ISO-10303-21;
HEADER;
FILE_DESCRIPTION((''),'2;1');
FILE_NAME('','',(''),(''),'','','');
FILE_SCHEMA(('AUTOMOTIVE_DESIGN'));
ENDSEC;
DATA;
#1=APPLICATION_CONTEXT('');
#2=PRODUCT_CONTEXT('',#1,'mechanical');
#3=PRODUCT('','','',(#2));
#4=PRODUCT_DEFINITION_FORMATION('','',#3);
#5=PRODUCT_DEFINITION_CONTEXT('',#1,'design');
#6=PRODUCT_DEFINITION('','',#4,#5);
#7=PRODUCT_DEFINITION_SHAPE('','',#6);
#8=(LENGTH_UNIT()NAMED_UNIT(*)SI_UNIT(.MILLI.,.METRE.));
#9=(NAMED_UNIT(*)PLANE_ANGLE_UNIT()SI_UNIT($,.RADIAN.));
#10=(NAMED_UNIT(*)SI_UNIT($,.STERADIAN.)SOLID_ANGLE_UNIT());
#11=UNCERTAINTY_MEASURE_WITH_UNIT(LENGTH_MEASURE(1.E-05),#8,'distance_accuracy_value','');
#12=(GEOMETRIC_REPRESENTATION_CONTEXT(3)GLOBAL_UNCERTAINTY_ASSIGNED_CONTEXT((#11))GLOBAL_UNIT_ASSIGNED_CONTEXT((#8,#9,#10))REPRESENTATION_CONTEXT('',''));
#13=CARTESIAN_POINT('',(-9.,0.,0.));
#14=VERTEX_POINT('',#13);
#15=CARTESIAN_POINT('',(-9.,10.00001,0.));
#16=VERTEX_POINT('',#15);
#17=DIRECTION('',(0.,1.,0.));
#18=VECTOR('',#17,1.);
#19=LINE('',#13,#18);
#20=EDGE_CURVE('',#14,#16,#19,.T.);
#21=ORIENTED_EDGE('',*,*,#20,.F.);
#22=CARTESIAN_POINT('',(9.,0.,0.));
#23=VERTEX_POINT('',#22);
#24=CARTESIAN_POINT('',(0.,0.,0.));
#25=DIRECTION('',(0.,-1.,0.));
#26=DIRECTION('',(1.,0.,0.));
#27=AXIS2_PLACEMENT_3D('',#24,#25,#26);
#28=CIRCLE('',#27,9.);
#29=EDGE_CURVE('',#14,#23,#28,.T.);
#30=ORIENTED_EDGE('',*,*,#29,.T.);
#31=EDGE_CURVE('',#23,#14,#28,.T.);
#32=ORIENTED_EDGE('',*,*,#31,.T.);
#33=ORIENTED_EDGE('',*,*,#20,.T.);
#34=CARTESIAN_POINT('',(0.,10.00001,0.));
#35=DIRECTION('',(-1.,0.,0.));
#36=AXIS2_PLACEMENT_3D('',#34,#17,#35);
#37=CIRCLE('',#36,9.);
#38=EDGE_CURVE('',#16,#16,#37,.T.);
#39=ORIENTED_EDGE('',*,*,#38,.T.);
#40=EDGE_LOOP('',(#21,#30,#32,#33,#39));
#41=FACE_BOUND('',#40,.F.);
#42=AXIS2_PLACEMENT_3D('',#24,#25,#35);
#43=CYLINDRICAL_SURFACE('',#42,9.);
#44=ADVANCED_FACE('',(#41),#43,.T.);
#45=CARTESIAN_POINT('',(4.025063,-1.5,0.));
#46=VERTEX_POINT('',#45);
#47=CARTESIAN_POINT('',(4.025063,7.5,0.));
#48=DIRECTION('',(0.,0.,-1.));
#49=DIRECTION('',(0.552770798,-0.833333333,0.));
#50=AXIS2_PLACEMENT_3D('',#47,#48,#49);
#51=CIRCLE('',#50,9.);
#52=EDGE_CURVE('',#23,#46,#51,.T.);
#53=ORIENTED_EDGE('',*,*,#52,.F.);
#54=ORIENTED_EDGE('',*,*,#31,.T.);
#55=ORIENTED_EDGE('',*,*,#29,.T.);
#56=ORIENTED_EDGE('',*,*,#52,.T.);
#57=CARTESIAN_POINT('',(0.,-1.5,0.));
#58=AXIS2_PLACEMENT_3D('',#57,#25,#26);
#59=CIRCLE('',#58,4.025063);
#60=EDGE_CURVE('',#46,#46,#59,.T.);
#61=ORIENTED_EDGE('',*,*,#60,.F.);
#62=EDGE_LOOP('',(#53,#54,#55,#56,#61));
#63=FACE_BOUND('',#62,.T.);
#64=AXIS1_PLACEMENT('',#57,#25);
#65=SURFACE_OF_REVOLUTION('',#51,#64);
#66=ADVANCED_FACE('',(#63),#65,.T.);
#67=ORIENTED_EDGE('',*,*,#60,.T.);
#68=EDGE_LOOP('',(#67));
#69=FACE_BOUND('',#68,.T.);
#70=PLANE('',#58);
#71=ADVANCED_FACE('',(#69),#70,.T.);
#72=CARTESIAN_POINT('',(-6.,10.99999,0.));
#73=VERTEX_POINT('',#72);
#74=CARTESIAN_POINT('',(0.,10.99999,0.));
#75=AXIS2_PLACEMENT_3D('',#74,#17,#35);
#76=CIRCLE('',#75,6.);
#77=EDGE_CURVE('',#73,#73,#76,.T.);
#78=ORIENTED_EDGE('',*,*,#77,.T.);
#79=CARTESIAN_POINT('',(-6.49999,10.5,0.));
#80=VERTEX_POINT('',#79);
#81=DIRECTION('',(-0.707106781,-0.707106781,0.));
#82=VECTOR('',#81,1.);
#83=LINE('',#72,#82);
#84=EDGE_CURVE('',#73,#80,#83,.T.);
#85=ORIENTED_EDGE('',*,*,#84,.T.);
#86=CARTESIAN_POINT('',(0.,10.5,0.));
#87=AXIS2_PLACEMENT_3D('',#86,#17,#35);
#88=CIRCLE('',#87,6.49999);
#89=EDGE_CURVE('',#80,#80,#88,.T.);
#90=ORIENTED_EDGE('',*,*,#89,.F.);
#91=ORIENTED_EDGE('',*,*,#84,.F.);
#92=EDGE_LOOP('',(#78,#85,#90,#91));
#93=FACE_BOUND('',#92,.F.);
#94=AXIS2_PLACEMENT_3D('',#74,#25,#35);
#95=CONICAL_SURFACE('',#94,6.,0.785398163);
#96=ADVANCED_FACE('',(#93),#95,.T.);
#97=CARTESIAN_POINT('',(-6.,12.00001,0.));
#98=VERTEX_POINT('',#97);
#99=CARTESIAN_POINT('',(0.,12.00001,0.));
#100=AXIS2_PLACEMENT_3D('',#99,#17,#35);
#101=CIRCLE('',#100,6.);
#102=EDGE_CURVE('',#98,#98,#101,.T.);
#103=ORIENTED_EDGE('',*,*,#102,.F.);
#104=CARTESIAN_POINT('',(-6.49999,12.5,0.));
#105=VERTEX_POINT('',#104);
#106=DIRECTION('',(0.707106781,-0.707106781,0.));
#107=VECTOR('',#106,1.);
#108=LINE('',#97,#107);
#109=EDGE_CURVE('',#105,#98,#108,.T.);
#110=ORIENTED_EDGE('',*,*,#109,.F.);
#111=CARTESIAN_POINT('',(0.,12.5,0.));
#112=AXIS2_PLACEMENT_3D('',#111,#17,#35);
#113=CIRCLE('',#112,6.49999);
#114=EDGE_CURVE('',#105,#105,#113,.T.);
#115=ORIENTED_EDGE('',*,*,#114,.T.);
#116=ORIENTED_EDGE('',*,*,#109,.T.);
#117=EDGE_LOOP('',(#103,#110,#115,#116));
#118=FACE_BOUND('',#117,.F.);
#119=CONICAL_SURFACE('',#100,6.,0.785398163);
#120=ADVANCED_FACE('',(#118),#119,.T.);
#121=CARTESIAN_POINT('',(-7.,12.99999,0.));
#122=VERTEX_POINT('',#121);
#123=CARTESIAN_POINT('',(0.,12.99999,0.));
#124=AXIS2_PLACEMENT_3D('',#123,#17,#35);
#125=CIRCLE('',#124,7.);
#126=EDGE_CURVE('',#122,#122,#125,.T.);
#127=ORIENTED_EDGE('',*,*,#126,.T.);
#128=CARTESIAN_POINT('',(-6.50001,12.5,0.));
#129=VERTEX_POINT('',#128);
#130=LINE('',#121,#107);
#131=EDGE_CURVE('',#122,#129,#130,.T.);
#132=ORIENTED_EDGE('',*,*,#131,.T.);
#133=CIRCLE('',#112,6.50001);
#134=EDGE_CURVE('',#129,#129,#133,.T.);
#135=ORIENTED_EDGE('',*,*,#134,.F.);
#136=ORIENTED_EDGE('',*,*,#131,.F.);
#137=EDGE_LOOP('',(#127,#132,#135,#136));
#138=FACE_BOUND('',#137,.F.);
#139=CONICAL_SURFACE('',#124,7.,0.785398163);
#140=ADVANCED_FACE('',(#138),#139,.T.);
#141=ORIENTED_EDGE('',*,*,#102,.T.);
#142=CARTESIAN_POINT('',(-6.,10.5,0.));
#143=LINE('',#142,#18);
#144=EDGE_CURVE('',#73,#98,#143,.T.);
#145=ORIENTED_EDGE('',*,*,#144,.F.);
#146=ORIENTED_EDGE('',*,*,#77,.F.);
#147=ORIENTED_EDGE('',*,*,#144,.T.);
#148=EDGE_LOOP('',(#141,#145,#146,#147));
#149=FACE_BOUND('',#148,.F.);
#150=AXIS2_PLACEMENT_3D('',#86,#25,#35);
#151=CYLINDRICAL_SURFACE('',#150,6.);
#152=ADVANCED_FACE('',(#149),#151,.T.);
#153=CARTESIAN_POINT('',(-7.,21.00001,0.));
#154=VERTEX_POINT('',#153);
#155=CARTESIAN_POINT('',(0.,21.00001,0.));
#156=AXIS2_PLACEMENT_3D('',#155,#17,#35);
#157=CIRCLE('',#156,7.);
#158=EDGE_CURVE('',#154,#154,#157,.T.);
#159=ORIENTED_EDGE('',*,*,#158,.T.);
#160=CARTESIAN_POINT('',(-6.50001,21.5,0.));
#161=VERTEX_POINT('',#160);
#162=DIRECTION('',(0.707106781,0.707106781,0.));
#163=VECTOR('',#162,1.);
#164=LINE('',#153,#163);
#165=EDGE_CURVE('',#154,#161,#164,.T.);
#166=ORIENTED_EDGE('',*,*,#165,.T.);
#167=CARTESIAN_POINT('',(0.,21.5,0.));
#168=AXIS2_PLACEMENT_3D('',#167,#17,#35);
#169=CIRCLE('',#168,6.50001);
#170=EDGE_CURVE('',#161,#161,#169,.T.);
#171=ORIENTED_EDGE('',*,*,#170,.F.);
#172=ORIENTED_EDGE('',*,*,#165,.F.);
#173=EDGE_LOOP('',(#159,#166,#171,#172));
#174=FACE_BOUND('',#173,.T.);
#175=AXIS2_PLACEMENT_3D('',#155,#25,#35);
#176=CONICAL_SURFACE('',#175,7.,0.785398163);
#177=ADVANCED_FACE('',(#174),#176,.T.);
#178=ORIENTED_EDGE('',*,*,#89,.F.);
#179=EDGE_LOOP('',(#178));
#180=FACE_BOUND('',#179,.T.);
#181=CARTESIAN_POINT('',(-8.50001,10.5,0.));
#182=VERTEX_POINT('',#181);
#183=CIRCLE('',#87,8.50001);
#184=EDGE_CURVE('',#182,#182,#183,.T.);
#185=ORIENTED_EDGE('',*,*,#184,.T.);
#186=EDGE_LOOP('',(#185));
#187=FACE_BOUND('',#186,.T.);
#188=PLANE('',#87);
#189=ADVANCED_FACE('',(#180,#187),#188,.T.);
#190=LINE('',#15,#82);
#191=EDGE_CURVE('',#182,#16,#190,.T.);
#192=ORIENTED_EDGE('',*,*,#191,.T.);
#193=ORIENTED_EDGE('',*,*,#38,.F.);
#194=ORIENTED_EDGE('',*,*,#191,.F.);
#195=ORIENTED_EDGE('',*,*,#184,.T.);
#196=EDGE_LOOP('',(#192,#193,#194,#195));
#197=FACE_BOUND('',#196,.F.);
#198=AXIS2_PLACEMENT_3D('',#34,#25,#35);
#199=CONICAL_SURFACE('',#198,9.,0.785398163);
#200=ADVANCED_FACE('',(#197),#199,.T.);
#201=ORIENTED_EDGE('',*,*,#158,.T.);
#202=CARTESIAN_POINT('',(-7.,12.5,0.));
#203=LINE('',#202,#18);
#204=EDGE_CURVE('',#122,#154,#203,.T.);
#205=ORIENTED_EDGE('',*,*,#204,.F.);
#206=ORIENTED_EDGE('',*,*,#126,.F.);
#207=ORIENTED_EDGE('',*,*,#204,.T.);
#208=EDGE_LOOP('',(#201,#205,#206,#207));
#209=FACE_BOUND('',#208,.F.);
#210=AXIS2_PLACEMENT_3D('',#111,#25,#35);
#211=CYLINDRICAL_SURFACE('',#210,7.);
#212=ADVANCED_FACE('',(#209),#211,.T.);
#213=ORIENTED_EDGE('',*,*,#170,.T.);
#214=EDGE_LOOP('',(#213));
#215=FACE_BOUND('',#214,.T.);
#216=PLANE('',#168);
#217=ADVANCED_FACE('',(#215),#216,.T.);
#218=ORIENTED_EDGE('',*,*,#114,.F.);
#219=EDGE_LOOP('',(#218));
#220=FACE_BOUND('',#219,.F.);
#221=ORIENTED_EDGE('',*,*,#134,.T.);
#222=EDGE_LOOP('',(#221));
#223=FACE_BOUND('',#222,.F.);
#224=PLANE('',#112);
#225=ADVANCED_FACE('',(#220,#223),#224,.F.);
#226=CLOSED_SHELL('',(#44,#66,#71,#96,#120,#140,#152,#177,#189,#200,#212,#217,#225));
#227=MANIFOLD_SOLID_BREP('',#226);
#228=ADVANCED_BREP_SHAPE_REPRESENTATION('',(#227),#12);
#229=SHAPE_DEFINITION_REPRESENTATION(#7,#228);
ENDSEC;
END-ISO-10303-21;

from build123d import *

# Parameters (mm, degrees)
F0_R     = 9
F1_DEPTH = 1.5
F3_R     = 9
F4_DEPTH = 10.5
F5_R     = 6
F6_DEPTH = 2
F7_R     = 7
F8_DEPTH = 9
F9_SIZE  = 0.49999


# Not quite as in the source:
# - a fillet or chamfer that OpenCascade refuses, or shapes differently, is made with other operations: its cross-section is extruded or revolved along the edge and cut away or added
# - a fillet or chamfer is up to 0.001 mm smaller than in the source, because OpenCascade refuses the exact size


with BuildPart() as f1:
    # F0 (on Front) → F1 (new body)
    with BuildSketch(Plane.XZ):
        Circle(F0_R)
    extrude(amount=F1_DEPTH)

    # F2: fillet of radius 9 on 1 edges, made by hand

    # F2_s1 → F2_t2 (revolve, cut)
    with BuildSketch(Plane.XY):
        with BuildLine():
            ThreePointArc((9, 0), (6.6231390258, -1.1168439698), (4.0250628145, -1.5))
            Line((4.0250628145, -1.5), (4.0250628145, -1.68))
            Line((4.0250628145, -1.68), (9, -1.68))
            Line((9, -1.68), (9.18, -1.5))
            ThreePointArc((9.18, -1.5), (9.18, -0.75), (9.0994987437, -0.15))
            Line((9.0994987437, -0.15), (9, 0))
        make_face()
    revolve(axis=Axis((0, -1.5, 0), (0, -1, 0)), mode=Mode.SUBTRACT)

    # F3 (on face) → F4 (join)
    with BuildSketch(Plane(origin=(0, 0, 0), x_dir=(-1, 0, 0), z_dir=(0, 1, 0))):
        Circle(F3_R)
    extrude(amount=F4_DEPTH)

    # F5 (on face) → F6 (join)
    with BuildSketch(Plane(origin=(0, 10.5, 0), x_dir=(-1, 0, 0), z_dir=(0, 1, 0))):
        Circle(F5_R)
    extrude(amount=F6_DEPTH)

    # F7 (on face) → F8 (join)
    with BuildSketch(Plane(origin=(0, 12.5, 0), x_dir=(-1, 0, 0), z_dir=(0, 1, 0))):
        Circle(F7_R)
    extrude(amount=F8_DEPTH)

    # F9 (size 0.5 in the source; OpenCascade refuses exactly that, so slightly less here)
    f9_edges = [f1.edges().sort_by_distance(p)[0] for p in [
        (6, 12.5, 0),
        (6, 10.5, 0),
        (9, 10.5, 0),
        (7, 12.5, 0),
        (7, 21.5, 0),
    ]]
    chamfer(f9_edges, length=F9_SIZE)


solid = f1.part
